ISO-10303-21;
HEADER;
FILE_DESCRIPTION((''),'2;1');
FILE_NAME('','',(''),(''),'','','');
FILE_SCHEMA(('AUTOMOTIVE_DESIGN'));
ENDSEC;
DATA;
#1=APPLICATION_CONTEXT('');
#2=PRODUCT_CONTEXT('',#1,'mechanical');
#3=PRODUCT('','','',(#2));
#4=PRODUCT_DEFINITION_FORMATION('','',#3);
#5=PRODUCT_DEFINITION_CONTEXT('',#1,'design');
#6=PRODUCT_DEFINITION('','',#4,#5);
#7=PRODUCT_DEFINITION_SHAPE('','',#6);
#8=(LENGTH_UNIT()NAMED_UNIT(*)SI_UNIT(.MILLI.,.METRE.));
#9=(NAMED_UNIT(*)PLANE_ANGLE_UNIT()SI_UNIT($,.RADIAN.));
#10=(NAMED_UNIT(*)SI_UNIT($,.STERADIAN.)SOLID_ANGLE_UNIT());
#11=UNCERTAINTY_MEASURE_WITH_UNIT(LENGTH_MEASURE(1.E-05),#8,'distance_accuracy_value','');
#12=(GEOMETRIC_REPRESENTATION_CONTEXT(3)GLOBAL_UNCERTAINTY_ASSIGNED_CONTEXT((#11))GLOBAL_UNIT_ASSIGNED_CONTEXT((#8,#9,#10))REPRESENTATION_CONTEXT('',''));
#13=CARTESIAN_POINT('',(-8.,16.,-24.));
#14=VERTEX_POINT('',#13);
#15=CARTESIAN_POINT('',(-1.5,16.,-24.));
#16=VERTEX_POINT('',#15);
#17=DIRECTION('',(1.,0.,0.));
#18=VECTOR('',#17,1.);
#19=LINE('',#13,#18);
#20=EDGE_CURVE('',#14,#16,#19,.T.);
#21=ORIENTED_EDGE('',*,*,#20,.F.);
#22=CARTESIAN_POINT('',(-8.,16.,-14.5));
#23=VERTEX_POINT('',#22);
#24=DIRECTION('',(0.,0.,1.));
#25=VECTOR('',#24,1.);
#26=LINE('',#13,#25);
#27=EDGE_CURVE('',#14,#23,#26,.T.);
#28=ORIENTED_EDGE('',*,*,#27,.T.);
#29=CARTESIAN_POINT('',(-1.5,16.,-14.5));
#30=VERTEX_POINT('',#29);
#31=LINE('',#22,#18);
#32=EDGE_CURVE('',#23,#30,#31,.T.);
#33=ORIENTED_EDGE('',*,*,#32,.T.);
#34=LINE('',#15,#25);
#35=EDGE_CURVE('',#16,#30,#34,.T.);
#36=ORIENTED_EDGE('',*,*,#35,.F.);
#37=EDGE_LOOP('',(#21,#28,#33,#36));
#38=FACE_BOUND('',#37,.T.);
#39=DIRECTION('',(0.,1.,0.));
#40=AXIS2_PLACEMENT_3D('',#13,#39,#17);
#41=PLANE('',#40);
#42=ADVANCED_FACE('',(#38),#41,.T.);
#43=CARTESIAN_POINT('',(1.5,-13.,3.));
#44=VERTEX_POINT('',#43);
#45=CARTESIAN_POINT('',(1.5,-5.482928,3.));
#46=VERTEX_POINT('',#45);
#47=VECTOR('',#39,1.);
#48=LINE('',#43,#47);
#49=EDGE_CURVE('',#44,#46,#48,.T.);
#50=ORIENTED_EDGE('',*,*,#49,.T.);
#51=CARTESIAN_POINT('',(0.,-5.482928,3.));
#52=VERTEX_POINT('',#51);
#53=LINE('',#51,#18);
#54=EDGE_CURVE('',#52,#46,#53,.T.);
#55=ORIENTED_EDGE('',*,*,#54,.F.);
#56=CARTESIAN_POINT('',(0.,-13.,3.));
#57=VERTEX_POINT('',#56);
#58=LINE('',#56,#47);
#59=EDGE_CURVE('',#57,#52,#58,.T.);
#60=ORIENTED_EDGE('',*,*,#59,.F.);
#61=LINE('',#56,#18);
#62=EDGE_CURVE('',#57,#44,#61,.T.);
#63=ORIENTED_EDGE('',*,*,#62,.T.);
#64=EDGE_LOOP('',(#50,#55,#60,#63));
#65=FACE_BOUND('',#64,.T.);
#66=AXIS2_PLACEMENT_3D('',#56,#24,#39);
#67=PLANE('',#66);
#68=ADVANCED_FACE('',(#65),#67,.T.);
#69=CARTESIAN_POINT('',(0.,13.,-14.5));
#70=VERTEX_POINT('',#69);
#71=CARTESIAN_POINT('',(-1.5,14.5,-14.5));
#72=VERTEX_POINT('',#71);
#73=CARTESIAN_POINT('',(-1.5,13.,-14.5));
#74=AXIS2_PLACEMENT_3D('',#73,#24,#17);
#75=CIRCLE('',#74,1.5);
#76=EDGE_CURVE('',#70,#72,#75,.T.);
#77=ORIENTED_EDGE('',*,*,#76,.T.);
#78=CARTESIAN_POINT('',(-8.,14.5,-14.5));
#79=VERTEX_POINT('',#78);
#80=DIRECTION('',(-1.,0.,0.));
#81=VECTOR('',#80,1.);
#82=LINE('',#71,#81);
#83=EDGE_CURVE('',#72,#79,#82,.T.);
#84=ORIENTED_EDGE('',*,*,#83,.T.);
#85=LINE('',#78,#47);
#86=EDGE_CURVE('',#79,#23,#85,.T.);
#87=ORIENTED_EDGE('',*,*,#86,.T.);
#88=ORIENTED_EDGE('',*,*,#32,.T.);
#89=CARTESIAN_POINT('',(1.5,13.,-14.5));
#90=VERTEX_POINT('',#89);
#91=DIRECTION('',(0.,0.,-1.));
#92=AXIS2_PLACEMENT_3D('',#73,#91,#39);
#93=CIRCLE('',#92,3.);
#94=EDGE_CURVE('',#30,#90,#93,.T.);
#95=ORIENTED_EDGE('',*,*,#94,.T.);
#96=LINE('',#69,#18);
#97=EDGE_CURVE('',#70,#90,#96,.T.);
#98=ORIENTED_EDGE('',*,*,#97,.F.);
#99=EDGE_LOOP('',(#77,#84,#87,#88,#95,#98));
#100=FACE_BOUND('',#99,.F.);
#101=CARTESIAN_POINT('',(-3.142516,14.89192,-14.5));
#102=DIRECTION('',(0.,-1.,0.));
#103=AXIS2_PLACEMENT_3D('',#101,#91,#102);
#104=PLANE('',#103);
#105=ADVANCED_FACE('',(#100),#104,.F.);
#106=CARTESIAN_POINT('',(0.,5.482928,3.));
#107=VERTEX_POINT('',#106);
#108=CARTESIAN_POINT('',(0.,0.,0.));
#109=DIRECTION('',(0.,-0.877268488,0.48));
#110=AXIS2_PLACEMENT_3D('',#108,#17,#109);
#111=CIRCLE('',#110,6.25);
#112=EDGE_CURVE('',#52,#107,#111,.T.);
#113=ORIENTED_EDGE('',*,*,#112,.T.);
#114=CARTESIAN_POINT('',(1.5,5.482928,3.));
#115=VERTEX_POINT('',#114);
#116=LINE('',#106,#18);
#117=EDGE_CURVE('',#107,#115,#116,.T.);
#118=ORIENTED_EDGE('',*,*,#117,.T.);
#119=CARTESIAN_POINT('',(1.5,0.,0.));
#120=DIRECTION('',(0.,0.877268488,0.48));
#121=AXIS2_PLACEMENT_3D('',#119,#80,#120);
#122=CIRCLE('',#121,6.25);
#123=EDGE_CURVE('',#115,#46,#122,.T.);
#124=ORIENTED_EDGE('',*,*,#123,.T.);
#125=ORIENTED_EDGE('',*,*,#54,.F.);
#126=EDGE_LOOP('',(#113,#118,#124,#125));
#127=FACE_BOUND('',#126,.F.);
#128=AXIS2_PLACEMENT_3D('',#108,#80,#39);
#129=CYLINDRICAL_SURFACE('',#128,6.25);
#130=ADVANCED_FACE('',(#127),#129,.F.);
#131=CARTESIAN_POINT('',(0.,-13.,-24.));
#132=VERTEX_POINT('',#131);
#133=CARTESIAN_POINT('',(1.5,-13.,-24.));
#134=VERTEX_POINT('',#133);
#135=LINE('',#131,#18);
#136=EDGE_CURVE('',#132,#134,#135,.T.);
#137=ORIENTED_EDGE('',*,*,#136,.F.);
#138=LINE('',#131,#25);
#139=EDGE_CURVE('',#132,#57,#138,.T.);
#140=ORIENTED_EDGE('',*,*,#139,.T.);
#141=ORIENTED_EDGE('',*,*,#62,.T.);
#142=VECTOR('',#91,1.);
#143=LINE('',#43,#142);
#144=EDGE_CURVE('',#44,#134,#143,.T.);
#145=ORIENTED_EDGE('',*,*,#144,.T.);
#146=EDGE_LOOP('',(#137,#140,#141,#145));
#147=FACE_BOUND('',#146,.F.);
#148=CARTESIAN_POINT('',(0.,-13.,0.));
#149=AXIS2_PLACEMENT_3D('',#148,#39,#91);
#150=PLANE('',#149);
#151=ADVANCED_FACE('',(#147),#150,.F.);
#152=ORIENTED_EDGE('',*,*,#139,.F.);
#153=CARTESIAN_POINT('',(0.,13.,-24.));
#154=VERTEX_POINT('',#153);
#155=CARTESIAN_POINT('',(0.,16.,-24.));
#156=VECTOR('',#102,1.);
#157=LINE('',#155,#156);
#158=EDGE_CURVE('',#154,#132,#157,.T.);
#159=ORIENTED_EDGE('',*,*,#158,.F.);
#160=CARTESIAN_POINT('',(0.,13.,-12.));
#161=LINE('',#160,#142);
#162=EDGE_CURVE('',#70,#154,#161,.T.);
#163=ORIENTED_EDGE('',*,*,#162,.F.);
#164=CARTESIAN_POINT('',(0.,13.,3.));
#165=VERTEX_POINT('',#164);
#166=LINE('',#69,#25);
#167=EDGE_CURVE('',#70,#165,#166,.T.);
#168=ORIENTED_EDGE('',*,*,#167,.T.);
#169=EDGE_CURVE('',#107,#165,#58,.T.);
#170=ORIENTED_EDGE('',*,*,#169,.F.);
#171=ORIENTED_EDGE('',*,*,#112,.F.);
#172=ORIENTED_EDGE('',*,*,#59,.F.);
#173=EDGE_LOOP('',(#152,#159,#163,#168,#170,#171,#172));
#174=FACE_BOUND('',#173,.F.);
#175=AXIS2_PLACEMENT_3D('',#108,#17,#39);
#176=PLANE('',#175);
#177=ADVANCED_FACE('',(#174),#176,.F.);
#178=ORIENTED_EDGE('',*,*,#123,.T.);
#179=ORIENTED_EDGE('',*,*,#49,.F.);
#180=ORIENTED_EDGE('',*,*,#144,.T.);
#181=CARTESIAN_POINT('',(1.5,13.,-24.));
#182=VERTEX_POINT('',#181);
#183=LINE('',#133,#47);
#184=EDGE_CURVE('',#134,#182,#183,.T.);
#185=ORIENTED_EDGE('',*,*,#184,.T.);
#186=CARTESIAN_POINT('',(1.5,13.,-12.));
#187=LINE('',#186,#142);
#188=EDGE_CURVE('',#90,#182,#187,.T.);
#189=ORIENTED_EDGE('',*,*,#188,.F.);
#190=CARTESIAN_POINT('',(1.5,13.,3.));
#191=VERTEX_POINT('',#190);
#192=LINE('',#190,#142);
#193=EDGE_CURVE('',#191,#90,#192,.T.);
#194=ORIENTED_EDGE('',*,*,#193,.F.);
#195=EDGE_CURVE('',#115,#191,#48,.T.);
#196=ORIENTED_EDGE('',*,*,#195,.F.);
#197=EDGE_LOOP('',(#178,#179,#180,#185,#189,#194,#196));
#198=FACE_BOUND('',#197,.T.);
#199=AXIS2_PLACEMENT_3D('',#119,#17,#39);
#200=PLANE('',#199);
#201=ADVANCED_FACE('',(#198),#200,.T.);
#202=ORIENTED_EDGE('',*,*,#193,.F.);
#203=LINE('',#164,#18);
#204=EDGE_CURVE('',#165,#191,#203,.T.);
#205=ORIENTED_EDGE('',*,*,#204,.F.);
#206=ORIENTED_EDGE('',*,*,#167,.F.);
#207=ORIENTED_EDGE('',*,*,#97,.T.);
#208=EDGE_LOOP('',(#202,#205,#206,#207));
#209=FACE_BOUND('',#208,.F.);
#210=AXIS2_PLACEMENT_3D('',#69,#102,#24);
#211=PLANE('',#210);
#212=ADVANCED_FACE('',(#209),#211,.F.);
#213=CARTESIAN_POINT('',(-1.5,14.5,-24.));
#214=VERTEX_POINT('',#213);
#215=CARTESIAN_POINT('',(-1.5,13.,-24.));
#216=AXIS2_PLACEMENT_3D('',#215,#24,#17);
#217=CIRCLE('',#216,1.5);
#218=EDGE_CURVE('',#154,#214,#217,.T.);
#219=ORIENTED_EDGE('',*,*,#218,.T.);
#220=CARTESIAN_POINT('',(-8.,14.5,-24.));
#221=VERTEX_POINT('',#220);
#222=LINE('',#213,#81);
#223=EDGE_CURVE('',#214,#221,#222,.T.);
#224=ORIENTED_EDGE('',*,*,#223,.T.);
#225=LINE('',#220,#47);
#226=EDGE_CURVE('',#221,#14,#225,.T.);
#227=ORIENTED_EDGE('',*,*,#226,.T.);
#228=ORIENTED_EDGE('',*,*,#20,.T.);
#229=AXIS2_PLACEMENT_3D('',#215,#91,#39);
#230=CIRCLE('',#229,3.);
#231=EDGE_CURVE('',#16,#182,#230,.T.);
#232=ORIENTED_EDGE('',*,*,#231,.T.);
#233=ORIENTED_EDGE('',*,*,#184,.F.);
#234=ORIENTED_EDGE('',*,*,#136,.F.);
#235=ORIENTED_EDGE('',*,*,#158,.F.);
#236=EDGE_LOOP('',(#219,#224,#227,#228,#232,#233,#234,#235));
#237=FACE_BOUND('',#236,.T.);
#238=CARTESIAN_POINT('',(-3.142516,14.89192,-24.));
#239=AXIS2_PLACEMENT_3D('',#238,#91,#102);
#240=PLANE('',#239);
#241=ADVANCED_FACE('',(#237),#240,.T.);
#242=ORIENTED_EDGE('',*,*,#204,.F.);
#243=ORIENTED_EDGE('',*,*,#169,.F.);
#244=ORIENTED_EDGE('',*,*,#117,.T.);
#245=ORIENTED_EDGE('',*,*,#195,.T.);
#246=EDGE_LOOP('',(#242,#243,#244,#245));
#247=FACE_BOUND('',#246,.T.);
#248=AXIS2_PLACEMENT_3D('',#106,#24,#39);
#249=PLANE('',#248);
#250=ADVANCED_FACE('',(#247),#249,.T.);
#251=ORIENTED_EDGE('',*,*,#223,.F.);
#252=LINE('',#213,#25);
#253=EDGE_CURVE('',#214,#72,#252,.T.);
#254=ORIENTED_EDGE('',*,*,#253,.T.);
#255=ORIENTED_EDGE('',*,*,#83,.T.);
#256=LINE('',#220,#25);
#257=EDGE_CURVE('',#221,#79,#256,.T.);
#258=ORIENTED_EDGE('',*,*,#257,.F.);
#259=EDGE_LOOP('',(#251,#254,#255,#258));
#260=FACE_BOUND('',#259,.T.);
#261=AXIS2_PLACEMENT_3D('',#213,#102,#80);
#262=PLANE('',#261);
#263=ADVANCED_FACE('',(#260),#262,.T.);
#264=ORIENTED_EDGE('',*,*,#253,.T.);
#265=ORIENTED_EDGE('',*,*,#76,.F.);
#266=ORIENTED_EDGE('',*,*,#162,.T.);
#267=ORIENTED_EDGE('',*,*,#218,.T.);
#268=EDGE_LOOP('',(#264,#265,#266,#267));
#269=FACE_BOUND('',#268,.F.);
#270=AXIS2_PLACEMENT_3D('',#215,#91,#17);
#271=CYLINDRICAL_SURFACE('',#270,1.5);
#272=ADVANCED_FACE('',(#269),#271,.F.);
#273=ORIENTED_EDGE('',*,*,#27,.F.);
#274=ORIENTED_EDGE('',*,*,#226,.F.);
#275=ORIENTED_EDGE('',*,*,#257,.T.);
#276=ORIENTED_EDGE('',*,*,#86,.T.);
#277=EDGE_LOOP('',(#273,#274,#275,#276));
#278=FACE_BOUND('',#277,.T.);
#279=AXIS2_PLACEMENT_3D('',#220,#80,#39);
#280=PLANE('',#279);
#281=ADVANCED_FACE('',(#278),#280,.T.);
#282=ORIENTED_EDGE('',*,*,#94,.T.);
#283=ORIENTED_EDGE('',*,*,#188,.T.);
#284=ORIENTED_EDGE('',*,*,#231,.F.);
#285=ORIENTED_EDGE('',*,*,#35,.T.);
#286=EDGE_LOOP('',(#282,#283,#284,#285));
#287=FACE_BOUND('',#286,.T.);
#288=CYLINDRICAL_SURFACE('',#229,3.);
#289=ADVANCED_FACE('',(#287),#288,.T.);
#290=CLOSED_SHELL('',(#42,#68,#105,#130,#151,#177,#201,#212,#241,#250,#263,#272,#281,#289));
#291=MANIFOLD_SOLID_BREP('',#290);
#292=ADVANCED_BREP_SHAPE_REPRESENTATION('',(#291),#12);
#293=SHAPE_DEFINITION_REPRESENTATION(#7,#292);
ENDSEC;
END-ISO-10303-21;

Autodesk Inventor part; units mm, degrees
ref_plane "YZ Plane" through (0, 0, 0) normal (1, 0, 0) x (0, 1, 0)
ref_plane "XZ Plane" through (0, 0, 0) normal (0, 1, 0) x (-1, 0, 0)
ref_plane "XY Plane" through (0, 0, 0) normal (0, 0, 1) x (1, 0, 0)
sketch "スケッチ2" plane through (0, 0, 0) normal (1, 0, 0) x (0, 1, 0)
  circle A0 centre (0, 0) radius 6.25
  line L0 (13, 0) -> (-13, 0) construction
  line L1 (-13, 0) -> (-13, -24)
  line L2 (-13, -24) -> (13, -24)
  line L3 (13, -24) -> (13, 0)
  line L4 (13, -24) -> (16, -24)
  line L5 (16, -24) -> (16, -14.5)
  line L6 (16, -14.5) -> (13, -14.5)
  line L7 (13, -14.5) -> (13, -24)
  line L8 (13, 0) -> (-13, 0)
  line L9 (-13, 0) -> (-13, 3)
  line L10 (-13, 3) -> (13, 3)
  line L11 (13, 3) -> (13, 0)
  point P0 (13, 0)
  point P1 (5.4829, 3)
  point P2 (-5.4829, 3)
  point P3 (-13, 0)
  dimension "d0" = 12.5
  dimension "d1" = 26
  dimension "d2" = 24
  dimension "d3" = 3
  dimension "d4" = 9.5
  dimension "d5" = 3
extrude "プレート1" add sketch "スケッチ2" along normal blind 1.5 contours L8 L3 L2 L1 A0 | A0 L10 L11 L8 | L8 L9 L10 A0 | L6 L5 L4 L3
sketch "スケッチ3" plane through (1.5, 14.5, -24) normal (0, 1, 0) x (-1, 0, 0)
  line L0 (0, 9.5) -> (0, 0)
  line L1 (0, 0) -> (9.5, 0)
  line L2 (9.5, 0) -> (9.5, 9.5)
  line L3 (9.5, 9.5) -> (0, 9.5)
edge flange "フランジ1" height 9.5 angle 90 thickness 1.5 bend radius 1.5 thickness toward (0, 1, 0) relief tear relief width 1.5 relief depth 0.75 edges at (0, 16, -19.25) wall of the first edge with corners at (1.5, 14.5, -14.5) (1.5, 14.5, -24) (-8, 14.5, -24) (-8, 14.5, -14.5)
bend "曲げ1"
corner "コーナー1"
equation "\"d6\" = Thickness"
equation "\"d7\" = BendReliefWidth"
equation "\"d8\" = BendReliefDepth"
equation "\"d9\" = MinimumRemnant"
equation "\"d10\" = TransitionRadius"
equation "\"d13\" = BendRadius"
equation "\"d14\" = CornerReliefSize"
equation "\"d15\" = GapSize"
equation "\"d16\" = JacobiRadiusSize"
equation "\"BendRadius\" = Thickness"
equation "\"BendReliefWidth\" = Thickness"
equation "\"BendReliefDepth\" = 0.5 * Thickness"
equation "\"CornerReliefSize\" = 4 * Thickness"
equation "\"MinimumRemnant\" = 2 * Thickness"
equation "\"TransitionRadius\" = BendRadius"
equation "\"JacobiRadiusSize\" = BendRadius"
equation "\"GapSize\" = Thickness"
equation "\"Thickness\" = 1.5"
properties part number "hipjoint_toleg_under_down_right"
